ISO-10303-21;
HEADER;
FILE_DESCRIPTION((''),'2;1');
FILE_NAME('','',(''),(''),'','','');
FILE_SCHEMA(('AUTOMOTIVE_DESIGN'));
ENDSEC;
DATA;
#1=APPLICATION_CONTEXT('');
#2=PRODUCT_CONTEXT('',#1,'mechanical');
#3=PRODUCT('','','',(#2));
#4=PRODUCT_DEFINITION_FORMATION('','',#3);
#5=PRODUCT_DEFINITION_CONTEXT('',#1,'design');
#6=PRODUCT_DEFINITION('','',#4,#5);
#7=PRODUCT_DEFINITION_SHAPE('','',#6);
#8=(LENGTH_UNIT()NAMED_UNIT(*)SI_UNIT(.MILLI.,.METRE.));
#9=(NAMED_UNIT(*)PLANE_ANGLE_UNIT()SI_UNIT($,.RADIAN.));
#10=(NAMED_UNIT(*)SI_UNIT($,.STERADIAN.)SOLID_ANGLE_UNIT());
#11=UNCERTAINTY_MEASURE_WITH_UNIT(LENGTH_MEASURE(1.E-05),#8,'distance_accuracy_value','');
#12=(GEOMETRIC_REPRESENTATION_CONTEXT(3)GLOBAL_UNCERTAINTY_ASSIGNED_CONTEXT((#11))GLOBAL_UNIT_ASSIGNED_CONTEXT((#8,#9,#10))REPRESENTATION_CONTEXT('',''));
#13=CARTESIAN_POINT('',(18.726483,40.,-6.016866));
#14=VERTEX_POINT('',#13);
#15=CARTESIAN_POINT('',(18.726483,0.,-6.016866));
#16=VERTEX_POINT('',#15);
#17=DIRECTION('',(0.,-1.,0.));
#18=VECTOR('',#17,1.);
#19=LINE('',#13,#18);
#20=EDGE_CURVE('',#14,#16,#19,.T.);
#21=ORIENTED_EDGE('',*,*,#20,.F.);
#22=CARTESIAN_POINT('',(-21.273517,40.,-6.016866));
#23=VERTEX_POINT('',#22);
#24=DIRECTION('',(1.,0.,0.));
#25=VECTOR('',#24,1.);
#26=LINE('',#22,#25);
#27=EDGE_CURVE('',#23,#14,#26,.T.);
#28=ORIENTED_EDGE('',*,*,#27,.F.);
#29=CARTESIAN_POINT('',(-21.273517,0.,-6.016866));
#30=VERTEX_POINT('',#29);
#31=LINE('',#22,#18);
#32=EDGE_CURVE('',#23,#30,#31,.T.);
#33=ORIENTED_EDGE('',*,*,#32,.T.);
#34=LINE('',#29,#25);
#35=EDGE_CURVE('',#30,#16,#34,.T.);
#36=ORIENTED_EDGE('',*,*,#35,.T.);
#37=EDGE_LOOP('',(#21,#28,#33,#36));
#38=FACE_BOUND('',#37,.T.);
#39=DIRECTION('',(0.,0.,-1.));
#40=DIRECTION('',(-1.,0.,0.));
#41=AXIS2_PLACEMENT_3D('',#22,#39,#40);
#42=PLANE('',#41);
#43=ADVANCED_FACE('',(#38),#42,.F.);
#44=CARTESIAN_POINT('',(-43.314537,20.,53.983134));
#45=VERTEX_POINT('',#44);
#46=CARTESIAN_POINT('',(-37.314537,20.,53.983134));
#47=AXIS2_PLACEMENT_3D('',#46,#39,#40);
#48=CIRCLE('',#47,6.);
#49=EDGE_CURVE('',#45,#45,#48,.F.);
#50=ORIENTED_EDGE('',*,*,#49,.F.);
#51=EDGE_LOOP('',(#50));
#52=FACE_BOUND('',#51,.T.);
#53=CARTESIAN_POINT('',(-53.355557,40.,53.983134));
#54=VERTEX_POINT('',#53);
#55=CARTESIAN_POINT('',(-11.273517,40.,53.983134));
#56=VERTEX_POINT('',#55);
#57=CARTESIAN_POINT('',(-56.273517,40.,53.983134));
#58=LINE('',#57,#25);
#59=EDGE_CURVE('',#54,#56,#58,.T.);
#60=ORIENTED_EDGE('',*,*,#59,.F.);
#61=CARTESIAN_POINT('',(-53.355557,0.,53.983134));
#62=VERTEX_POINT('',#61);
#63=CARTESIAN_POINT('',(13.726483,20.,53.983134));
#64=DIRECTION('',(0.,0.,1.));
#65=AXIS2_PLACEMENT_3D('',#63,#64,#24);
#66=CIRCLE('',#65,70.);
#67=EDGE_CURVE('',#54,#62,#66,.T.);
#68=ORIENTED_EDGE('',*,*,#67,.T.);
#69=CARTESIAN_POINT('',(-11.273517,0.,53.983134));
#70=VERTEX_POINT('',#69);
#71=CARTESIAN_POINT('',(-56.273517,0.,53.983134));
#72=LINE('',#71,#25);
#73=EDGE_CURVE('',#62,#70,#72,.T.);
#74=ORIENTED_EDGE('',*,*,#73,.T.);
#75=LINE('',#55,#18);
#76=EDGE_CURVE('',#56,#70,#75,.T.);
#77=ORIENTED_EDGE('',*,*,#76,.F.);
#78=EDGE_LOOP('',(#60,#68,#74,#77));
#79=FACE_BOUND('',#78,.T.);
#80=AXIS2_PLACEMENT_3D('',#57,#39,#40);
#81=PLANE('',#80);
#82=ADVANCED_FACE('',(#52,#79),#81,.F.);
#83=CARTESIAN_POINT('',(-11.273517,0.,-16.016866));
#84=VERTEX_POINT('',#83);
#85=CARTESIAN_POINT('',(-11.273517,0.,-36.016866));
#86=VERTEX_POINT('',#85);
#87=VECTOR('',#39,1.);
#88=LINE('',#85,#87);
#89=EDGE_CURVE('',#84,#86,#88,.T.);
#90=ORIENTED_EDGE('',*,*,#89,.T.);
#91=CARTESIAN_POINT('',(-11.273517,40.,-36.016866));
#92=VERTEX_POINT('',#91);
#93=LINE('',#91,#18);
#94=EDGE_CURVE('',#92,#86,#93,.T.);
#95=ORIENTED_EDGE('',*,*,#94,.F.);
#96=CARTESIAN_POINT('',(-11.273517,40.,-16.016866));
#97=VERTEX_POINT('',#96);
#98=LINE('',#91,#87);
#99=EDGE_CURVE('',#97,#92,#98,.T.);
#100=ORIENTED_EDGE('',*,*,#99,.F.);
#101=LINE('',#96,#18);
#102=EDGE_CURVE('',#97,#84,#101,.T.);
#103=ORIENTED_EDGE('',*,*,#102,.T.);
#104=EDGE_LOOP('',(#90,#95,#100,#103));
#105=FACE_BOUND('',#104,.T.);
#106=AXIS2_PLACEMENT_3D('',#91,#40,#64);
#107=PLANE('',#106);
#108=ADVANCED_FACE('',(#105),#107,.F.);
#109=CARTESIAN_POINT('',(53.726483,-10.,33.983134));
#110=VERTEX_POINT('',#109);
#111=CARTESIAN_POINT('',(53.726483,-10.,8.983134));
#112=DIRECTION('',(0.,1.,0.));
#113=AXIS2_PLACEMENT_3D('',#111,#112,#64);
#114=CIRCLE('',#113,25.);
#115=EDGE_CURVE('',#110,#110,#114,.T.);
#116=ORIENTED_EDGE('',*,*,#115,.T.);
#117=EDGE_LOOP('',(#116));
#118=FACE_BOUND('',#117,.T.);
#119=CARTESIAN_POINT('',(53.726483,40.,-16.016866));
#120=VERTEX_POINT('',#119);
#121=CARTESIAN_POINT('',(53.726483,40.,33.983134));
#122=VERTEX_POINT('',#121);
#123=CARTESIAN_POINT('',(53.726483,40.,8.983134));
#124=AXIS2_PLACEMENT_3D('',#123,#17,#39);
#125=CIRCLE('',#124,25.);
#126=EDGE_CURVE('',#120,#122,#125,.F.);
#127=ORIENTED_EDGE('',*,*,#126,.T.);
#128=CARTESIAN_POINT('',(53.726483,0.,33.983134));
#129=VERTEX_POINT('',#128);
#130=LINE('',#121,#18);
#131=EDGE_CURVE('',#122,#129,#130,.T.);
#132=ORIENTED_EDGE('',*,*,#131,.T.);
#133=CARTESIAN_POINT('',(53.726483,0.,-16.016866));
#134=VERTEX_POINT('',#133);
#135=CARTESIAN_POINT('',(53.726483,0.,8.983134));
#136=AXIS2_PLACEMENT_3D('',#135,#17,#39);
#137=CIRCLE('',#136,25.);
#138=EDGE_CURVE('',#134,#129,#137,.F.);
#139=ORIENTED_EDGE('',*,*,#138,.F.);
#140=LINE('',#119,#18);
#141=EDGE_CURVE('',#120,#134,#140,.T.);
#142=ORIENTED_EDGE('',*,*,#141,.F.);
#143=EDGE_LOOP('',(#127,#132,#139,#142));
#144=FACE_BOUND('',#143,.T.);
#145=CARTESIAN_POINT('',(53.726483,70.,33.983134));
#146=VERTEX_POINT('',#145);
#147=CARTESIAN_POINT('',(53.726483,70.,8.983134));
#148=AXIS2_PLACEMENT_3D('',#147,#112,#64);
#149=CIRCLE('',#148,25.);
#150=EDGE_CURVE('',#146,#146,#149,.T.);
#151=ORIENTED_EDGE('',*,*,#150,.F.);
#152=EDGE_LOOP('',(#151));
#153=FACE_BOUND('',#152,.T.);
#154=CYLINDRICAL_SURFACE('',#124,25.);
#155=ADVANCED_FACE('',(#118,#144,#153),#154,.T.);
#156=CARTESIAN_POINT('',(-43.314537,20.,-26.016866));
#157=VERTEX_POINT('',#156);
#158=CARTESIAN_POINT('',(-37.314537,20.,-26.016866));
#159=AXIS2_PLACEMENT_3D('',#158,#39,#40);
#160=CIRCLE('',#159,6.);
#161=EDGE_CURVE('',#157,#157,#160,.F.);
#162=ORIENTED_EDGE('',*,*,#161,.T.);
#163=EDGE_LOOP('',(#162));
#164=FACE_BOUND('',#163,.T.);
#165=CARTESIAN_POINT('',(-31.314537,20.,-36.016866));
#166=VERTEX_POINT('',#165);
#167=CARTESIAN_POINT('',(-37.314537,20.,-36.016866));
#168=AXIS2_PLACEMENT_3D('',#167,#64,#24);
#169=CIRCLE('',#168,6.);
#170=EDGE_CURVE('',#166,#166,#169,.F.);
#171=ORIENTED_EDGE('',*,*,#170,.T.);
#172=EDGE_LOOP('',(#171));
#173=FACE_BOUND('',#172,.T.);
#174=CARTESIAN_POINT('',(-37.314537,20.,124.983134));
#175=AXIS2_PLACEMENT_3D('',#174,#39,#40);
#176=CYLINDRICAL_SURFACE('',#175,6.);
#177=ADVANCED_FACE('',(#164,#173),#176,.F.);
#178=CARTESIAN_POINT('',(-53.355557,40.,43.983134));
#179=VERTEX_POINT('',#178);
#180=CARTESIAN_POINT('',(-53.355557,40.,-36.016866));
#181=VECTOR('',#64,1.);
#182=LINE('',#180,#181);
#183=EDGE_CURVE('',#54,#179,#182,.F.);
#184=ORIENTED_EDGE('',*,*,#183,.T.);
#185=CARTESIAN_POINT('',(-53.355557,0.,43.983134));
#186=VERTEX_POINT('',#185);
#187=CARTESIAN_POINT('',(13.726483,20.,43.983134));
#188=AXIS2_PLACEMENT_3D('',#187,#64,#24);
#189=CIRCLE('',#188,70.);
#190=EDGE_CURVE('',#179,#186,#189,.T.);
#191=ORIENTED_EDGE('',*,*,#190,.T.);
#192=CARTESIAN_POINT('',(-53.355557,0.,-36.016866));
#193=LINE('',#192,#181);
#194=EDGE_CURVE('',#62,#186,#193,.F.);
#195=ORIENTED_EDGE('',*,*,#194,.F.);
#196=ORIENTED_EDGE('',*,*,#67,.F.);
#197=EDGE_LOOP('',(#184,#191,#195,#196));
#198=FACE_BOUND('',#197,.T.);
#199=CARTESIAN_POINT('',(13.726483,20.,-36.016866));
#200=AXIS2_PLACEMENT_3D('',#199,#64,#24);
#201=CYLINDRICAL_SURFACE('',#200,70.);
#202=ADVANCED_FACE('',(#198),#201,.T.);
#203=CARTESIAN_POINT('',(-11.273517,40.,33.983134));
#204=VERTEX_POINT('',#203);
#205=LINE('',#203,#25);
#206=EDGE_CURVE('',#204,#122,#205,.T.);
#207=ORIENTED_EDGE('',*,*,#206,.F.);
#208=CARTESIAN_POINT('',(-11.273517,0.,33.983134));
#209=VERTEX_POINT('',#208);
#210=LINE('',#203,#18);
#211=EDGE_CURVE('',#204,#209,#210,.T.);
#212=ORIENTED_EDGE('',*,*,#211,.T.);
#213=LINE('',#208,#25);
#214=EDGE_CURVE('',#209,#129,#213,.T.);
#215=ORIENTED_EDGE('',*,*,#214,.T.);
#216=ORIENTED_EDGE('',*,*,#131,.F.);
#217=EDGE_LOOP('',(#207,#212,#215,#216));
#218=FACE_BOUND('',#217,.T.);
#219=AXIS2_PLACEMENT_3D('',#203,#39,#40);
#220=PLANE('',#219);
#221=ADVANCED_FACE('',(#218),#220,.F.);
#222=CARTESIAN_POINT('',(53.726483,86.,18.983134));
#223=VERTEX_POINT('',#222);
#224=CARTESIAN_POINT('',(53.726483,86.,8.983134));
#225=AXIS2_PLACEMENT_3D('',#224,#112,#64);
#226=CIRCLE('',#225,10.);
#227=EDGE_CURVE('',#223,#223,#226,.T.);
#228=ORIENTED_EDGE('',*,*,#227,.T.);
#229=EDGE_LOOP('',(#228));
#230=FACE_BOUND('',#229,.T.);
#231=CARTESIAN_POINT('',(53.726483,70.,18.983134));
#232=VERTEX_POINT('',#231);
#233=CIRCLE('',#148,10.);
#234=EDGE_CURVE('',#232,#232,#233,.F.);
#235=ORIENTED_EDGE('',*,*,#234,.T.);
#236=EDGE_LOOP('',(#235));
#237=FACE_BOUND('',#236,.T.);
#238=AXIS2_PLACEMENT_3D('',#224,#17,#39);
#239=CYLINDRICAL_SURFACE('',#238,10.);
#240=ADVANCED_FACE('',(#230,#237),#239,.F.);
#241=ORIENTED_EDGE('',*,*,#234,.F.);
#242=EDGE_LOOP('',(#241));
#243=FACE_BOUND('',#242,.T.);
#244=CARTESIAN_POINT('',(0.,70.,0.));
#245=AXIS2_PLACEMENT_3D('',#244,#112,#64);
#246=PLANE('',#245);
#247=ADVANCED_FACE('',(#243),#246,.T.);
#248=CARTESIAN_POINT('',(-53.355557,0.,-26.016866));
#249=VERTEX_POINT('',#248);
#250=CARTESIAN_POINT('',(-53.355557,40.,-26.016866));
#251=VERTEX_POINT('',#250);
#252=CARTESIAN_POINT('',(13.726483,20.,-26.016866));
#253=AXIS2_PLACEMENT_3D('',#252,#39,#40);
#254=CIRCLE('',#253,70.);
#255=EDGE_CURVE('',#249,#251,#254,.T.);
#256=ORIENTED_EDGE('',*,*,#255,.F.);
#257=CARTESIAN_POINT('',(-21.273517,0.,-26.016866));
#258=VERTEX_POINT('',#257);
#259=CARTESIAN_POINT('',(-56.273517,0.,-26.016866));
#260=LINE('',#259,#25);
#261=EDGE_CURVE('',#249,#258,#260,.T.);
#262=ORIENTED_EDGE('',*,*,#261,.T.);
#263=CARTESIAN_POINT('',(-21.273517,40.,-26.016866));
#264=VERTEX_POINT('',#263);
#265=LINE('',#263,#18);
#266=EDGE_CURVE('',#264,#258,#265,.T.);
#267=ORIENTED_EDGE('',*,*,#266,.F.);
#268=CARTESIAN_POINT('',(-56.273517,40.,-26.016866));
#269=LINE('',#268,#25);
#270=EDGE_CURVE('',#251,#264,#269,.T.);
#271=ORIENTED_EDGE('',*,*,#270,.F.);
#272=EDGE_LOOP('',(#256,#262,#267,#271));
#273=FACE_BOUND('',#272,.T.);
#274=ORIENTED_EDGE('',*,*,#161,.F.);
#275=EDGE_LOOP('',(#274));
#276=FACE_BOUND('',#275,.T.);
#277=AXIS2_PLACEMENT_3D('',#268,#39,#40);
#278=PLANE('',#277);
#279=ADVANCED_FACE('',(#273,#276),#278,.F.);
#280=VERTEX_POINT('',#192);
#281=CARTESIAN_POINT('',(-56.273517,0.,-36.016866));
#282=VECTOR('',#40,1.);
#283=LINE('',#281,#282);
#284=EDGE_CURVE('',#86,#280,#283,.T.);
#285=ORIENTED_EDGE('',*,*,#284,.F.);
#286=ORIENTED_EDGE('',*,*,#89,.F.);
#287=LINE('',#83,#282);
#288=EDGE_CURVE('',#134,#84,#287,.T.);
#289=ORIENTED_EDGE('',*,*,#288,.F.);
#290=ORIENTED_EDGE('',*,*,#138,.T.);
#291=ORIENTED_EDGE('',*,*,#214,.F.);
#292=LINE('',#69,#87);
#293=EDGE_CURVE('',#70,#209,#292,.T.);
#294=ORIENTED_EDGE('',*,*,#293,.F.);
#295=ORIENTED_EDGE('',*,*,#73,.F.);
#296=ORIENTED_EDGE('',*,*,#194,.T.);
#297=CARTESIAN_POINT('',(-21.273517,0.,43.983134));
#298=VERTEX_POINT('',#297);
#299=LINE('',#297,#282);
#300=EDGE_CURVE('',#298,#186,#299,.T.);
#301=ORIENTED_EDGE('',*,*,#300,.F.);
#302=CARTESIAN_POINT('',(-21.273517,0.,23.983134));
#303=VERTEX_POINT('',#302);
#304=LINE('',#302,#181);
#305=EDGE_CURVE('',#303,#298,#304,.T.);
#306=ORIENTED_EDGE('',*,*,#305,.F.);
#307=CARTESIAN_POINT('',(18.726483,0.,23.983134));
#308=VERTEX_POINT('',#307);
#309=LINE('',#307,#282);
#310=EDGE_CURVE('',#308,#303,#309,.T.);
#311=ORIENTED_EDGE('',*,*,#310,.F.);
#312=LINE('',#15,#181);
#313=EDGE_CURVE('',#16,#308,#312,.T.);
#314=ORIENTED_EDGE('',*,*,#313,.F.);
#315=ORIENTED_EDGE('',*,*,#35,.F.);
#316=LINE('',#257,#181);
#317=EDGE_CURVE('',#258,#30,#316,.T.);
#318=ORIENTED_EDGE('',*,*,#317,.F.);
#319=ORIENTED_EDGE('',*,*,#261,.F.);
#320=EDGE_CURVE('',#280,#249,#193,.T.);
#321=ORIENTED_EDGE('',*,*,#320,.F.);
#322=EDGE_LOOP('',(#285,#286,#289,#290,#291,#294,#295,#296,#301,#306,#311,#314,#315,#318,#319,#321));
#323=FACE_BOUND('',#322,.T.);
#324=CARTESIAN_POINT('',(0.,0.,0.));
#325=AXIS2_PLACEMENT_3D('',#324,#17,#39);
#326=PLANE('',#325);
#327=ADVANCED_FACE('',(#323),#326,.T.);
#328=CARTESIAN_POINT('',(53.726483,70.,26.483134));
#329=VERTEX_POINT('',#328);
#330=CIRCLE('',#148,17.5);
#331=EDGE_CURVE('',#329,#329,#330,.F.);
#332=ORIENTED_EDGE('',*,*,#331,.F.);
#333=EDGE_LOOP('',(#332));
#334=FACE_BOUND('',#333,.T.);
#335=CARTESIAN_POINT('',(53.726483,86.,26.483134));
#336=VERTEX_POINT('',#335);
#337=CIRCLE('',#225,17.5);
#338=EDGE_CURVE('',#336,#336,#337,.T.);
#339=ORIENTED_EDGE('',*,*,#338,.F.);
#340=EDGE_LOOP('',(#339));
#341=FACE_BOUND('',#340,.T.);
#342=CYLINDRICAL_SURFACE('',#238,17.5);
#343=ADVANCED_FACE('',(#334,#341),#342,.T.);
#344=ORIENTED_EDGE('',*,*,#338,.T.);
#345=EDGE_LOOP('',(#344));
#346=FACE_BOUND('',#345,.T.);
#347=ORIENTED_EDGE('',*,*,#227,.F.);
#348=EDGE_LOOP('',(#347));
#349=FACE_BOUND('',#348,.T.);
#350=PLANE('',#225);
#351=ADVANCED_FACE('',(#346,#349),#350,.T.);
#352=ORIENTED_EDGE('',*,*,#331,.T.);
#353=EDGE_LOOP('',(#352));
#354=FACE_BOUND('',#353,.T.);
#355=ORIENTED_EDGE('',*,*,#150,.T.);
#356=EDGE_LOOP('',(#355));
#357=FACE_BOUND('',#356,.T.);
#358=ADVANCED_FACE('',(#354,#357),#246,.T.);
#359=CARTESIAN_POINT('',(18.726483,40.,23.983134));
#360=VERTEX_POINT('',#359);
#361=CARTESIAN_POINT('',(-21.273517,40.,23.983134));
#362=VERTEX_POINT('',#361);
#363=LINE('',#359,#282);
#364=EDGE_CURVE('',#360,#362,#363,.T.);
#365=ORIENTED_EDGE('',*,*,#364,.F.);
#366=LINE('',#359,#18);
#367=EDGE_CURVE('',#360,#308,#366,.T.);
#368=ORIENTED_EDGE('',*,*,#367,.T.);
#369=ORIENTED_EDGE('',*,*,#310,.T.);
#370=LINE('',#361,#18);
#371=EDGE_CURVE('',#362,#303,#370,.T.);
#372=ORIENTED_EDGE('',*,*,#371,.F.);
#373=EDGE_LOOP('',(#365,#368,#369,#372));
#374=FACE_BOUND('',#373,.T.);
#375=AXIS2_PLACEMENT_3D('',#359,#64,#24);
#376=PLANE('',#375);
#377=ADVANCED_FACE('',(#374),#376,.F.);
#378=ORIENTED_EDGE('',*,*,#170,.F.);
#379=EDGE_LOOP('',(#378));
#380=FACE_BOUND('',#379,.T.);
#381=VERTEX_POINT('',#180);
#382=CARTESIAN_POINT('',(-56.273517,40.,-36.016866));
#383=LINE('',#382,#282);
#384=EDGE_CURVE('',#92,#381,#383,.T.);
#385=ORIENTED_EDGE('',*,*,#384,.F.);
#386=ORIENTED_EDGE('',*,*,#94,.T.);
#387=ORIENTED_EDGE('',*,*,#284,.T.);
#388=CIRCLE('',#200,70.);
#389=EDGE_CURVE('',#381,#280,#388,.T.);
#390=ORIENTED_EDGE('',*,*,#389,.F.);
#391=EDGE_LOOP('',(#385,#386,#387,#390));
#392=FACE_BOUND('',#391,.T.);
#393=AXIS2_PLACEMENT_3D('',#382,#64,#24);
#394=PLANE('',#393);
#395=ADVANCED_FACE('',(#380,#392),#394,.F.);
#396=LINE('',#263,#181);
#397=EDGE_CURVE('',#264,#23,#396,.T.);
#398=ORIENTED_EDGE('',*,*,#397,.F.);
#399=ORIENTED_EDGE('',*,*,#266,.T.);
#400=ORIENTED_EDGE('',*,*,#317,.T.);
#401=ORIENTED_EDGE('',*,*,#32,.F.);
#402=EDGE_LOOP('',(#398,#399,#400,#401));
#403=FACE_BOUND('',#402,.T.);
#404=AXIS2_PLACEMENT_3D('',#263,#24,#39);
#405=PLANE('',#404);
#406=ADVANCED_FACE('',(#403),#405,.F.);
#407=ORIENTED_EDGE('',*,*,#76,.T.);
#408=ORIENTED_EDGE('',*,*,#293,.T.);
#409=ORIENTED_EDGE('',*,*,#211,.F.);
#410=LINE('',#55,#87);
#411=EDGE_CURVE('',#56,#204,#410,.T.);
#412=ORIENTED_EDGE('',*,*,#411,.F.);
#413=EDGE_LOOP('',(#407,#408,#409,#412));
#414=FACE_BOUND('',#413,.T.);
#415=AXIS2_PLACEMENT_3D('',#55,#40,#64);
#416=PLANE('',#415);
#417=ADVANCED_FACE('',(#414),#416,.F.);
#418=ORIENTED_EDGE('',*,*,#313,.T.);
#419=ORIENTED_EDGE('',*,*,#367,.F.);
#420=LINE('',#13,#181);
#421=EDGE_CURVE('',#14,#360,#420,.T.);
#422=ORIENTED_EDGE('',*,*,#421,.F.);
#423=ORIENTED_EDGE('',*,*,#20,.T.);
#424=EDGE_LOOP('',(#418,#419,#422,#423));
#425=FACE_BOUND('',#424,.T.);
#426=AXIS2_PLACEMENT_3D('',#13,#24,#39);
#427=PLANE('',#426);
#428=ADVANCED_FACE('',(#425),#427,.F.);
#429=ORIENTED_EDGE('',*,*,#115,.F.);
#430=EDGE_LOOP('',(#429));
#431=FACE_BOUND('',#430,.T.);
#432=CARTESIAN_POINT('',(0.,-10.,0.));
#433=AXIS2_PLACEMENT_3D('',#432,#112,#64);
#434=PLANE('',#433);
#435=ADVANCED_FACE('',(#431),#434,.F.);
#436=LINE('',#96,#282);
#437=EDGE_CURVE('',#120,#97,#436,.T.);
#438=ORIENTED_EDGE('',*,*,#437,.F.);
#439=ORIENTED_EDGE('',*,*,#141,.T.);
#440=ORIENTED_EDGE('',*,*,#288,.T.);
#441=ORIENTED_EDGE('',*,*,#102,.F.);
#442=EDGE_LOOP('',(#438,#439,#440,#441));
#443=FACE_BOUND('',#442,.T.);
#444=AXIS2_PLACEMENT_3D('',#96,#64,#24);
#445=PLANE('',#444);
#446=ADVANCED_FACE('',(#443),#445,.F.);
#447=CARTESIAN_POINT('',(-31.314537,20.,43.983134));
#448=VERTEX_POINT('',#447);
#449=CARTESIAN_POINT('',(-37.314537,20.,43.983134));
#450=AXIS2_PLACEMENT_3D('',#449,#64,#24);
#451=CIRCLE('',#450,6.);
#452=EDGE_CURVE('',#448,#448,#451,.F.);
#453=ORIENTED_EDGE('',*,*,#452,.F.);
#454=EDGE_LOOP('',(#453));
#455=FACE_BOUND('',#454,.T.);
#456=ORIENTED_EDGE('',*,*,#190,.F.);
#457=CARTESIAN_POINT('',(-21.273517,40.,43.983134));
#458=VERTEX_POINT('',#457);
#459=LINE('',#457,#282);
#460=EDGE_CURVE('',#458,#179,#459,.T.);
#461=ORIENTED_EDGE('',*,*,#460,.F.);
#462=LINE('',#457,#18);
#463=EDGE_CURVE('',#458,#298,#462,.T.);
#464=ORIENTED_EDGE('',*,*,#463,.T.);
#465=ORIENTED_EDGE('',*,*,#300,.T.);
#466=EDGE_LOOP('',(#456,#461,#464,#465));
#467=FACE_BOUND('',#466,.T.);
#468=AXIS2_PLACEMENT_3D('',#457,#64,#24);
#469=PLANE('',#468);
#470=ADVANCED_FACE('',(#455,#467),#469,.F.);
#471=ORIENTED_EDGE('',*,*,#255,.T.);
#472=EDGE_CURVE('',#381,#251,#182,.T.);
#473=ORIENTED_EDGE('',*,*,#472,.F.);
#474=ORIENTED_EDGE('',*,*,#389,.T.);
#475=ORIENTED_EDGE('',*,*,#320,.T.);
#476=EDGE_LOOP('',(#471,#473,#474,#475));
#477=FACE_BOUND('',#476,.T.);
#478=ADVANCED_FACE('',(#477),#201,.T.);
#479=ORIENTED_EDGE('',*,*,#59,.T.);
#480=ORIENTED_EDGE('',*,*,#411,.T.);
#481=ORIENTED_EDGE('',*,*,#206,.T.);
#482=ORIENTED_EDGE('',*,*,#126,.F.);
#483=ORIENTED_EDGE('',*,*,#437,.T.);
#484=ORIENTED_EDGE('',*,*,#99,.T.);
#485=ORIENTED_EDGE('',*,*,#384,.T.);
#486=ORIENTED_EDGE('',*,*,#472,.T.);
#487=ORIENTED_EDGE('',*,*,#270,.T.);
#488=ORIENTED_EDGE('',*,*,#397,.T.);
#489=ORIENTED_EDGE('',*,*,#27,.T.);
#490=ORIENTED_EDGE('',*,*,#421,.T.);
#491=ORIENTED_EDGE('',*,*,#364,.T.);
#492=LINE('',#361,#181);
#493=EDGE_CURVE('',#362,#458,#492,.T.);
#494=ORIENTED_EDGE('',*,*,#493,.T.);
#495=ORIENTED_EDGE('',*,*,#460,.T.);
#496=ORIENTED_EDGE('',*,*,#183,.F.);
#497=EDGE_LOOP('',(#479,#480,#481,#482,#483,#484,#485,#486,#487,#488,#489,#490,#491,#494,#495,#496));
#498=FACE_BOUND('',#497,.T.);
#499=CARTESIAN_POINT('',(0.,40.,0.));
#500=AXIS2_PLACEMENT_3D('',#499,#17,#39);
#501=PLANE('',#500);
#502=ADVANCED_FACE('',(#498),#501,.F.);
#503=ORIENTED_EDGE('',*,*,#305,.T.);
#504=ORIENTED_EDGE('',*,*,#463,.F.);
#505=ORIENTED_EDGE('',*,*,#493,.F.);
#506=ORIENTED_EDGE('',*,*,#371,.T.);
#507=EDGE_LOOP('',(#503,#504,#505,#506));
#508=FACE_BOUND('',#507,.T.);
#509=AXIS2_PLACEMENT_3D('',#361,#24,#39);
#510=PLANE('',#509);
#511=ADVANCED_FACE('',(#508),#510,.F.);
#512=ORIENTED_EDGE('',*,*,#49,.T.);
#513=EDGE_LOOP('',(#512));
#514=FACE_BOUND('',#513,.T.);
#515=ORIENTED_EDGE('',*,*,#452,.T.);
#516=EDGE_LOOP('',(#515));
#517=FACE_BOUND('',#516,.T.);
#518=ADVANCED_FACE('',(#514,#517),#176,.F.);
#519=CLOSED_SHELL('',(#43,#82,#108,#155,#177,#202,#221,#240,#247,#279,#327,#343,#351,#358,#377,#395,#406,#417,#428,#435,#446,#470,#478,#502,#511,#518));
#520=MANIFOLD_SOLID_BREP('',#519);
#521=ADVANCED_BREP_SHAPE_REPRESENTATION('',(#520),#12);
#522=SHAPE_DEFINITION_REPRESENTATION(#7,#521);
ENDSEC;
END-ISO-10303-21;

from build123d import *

# Parameters (mm, degrees)
BOSS_EXTRUDE1_DEPTH      = 40
CUT_EXTRUDE2_DEPTH       = 90
CUT_EXTRUDE4_DEPTH       = 151
CUT_EXTRUDE4_DEPTH_BACK  = 151
SKETCH3_R                = 6
BOSS_EXTRUDE2_DEPTH      = 30
BOSS_EXTRUDE2_DEPTH_BACK = 50
F_3DSKETCH1_R            = 25
SKETCH5_R                = 17.5
SKETCH5_R_2              = 10
BOSS_EXTRUDE3_DEPTH      = 86


with BuildPart() as part:
    # Sketch1 → Boss-Extrude1 (new body)
    with BuildSketch(Plane(origin=(0, 0, 0), x_dir=(1, 0, 0), z_dir=(0, 1, 0))):
        Polygon((-56.273517373, 36.016865909), (-56.273517373, 26.016865909), (-21.273517373, 26.016865909), (-21.273517373, 6.016865909), (18.726482627, 6.016865909), (18.726482627, -23.983134091), (-21.273517373, -23.983134091), (-21.273517373, -43.983134091), (-56.273517373, -43.983134091), (-56.273517373, -53.983134091), (-11.273517373, -53.983134091), (-11.273517373, -33.983134091), (53.726482627, -33.983134091), (53.726482627, 16.016865909), (-11.273517373, 16.016865909), (-11.273517373, 36.016865909), align=None)
    extrude(amount=BOSS_EXTRUDE1_DEPTH)

    # Sketch2 → Cut-Extrude2 (cut)
    with BuildSketch(Plane.XY.offset(53.983134091)):
        with BuildLine():
            ThreePointArc((-56.273517373, 20), (-55.540185955, 30.10587075), (-53.355556698, 40))
            Line((-53.355556698, 40), (-56.273517373, 40))
            Line((-56.273517373, 40), (-56.273517373, 20))
        make_face()
        with BuildLine():
            ThreePointArc((-53.355556698, 0), (-55.540185955, 9.89412925), (-56.273517373, 20))
            Line((-56.273517373, 20), (-56.273517373, 0))
            Line((-56.273517373, 0), (-53.355556698, 0))
        make_face()
    extrude(amount=-CUT_EXTRUDE2_DEPTH, mode=Mode.SUBTRACT)

    # Sketch3 → Cut-Extrude4 (cut, two sides: drawn at the far end of the back side and taken through both)
    with BuildSketch(Plane.XY.offset(-26.016865909).offset(-CUT_EXTRUDE4_DEPTH_BACK)):
        with Locations((-37.314537036, 20)):
            Circle(SKETCH3_R)
    extrude(amount=CUT_EXTRUDE4_DEPTH + CUT_EXTRUDE4_DEPTH_BACK, mode=Mode.SUBTRACT)

    # 3DSketch1 → Boss-Extrude2 (add, two sides: drawn at the far end of the back side and taken through both)
    with BuildSketch(Plane(origin=(53.726482627, 40, 8.983134091), x_dir=(0, 0, 1), z_dir=(0, 1, 0)).offset(-BOSS_EXTRUDE2_DEPTH_BACK)):
        Circle(F_3DSKETCH1_R)
    extrude(amount=BOSS_EXTRUDE2_DEPTH + BOSS_EXTRUDE2_DEPTH_BACK)

    # Sketch5 → Boss-Extrude3 (add)
    with BuildSketch(Plane(origin=(0, 0, 0), x_dir=(1, 0, 0), z_dir=(0, 1, 0))):
        with Locations((53.726482627, -8.983134091)):
            Circle(SKETCH5_R)
        with Locations((53.726482627, -8.983134091)):
            Circle(SKETCH5_R_2, mode=Mode.SUBTRACT)
    extrude(amount=BOSS_EXTRUDE3_DEPTH)


solid = part.part
